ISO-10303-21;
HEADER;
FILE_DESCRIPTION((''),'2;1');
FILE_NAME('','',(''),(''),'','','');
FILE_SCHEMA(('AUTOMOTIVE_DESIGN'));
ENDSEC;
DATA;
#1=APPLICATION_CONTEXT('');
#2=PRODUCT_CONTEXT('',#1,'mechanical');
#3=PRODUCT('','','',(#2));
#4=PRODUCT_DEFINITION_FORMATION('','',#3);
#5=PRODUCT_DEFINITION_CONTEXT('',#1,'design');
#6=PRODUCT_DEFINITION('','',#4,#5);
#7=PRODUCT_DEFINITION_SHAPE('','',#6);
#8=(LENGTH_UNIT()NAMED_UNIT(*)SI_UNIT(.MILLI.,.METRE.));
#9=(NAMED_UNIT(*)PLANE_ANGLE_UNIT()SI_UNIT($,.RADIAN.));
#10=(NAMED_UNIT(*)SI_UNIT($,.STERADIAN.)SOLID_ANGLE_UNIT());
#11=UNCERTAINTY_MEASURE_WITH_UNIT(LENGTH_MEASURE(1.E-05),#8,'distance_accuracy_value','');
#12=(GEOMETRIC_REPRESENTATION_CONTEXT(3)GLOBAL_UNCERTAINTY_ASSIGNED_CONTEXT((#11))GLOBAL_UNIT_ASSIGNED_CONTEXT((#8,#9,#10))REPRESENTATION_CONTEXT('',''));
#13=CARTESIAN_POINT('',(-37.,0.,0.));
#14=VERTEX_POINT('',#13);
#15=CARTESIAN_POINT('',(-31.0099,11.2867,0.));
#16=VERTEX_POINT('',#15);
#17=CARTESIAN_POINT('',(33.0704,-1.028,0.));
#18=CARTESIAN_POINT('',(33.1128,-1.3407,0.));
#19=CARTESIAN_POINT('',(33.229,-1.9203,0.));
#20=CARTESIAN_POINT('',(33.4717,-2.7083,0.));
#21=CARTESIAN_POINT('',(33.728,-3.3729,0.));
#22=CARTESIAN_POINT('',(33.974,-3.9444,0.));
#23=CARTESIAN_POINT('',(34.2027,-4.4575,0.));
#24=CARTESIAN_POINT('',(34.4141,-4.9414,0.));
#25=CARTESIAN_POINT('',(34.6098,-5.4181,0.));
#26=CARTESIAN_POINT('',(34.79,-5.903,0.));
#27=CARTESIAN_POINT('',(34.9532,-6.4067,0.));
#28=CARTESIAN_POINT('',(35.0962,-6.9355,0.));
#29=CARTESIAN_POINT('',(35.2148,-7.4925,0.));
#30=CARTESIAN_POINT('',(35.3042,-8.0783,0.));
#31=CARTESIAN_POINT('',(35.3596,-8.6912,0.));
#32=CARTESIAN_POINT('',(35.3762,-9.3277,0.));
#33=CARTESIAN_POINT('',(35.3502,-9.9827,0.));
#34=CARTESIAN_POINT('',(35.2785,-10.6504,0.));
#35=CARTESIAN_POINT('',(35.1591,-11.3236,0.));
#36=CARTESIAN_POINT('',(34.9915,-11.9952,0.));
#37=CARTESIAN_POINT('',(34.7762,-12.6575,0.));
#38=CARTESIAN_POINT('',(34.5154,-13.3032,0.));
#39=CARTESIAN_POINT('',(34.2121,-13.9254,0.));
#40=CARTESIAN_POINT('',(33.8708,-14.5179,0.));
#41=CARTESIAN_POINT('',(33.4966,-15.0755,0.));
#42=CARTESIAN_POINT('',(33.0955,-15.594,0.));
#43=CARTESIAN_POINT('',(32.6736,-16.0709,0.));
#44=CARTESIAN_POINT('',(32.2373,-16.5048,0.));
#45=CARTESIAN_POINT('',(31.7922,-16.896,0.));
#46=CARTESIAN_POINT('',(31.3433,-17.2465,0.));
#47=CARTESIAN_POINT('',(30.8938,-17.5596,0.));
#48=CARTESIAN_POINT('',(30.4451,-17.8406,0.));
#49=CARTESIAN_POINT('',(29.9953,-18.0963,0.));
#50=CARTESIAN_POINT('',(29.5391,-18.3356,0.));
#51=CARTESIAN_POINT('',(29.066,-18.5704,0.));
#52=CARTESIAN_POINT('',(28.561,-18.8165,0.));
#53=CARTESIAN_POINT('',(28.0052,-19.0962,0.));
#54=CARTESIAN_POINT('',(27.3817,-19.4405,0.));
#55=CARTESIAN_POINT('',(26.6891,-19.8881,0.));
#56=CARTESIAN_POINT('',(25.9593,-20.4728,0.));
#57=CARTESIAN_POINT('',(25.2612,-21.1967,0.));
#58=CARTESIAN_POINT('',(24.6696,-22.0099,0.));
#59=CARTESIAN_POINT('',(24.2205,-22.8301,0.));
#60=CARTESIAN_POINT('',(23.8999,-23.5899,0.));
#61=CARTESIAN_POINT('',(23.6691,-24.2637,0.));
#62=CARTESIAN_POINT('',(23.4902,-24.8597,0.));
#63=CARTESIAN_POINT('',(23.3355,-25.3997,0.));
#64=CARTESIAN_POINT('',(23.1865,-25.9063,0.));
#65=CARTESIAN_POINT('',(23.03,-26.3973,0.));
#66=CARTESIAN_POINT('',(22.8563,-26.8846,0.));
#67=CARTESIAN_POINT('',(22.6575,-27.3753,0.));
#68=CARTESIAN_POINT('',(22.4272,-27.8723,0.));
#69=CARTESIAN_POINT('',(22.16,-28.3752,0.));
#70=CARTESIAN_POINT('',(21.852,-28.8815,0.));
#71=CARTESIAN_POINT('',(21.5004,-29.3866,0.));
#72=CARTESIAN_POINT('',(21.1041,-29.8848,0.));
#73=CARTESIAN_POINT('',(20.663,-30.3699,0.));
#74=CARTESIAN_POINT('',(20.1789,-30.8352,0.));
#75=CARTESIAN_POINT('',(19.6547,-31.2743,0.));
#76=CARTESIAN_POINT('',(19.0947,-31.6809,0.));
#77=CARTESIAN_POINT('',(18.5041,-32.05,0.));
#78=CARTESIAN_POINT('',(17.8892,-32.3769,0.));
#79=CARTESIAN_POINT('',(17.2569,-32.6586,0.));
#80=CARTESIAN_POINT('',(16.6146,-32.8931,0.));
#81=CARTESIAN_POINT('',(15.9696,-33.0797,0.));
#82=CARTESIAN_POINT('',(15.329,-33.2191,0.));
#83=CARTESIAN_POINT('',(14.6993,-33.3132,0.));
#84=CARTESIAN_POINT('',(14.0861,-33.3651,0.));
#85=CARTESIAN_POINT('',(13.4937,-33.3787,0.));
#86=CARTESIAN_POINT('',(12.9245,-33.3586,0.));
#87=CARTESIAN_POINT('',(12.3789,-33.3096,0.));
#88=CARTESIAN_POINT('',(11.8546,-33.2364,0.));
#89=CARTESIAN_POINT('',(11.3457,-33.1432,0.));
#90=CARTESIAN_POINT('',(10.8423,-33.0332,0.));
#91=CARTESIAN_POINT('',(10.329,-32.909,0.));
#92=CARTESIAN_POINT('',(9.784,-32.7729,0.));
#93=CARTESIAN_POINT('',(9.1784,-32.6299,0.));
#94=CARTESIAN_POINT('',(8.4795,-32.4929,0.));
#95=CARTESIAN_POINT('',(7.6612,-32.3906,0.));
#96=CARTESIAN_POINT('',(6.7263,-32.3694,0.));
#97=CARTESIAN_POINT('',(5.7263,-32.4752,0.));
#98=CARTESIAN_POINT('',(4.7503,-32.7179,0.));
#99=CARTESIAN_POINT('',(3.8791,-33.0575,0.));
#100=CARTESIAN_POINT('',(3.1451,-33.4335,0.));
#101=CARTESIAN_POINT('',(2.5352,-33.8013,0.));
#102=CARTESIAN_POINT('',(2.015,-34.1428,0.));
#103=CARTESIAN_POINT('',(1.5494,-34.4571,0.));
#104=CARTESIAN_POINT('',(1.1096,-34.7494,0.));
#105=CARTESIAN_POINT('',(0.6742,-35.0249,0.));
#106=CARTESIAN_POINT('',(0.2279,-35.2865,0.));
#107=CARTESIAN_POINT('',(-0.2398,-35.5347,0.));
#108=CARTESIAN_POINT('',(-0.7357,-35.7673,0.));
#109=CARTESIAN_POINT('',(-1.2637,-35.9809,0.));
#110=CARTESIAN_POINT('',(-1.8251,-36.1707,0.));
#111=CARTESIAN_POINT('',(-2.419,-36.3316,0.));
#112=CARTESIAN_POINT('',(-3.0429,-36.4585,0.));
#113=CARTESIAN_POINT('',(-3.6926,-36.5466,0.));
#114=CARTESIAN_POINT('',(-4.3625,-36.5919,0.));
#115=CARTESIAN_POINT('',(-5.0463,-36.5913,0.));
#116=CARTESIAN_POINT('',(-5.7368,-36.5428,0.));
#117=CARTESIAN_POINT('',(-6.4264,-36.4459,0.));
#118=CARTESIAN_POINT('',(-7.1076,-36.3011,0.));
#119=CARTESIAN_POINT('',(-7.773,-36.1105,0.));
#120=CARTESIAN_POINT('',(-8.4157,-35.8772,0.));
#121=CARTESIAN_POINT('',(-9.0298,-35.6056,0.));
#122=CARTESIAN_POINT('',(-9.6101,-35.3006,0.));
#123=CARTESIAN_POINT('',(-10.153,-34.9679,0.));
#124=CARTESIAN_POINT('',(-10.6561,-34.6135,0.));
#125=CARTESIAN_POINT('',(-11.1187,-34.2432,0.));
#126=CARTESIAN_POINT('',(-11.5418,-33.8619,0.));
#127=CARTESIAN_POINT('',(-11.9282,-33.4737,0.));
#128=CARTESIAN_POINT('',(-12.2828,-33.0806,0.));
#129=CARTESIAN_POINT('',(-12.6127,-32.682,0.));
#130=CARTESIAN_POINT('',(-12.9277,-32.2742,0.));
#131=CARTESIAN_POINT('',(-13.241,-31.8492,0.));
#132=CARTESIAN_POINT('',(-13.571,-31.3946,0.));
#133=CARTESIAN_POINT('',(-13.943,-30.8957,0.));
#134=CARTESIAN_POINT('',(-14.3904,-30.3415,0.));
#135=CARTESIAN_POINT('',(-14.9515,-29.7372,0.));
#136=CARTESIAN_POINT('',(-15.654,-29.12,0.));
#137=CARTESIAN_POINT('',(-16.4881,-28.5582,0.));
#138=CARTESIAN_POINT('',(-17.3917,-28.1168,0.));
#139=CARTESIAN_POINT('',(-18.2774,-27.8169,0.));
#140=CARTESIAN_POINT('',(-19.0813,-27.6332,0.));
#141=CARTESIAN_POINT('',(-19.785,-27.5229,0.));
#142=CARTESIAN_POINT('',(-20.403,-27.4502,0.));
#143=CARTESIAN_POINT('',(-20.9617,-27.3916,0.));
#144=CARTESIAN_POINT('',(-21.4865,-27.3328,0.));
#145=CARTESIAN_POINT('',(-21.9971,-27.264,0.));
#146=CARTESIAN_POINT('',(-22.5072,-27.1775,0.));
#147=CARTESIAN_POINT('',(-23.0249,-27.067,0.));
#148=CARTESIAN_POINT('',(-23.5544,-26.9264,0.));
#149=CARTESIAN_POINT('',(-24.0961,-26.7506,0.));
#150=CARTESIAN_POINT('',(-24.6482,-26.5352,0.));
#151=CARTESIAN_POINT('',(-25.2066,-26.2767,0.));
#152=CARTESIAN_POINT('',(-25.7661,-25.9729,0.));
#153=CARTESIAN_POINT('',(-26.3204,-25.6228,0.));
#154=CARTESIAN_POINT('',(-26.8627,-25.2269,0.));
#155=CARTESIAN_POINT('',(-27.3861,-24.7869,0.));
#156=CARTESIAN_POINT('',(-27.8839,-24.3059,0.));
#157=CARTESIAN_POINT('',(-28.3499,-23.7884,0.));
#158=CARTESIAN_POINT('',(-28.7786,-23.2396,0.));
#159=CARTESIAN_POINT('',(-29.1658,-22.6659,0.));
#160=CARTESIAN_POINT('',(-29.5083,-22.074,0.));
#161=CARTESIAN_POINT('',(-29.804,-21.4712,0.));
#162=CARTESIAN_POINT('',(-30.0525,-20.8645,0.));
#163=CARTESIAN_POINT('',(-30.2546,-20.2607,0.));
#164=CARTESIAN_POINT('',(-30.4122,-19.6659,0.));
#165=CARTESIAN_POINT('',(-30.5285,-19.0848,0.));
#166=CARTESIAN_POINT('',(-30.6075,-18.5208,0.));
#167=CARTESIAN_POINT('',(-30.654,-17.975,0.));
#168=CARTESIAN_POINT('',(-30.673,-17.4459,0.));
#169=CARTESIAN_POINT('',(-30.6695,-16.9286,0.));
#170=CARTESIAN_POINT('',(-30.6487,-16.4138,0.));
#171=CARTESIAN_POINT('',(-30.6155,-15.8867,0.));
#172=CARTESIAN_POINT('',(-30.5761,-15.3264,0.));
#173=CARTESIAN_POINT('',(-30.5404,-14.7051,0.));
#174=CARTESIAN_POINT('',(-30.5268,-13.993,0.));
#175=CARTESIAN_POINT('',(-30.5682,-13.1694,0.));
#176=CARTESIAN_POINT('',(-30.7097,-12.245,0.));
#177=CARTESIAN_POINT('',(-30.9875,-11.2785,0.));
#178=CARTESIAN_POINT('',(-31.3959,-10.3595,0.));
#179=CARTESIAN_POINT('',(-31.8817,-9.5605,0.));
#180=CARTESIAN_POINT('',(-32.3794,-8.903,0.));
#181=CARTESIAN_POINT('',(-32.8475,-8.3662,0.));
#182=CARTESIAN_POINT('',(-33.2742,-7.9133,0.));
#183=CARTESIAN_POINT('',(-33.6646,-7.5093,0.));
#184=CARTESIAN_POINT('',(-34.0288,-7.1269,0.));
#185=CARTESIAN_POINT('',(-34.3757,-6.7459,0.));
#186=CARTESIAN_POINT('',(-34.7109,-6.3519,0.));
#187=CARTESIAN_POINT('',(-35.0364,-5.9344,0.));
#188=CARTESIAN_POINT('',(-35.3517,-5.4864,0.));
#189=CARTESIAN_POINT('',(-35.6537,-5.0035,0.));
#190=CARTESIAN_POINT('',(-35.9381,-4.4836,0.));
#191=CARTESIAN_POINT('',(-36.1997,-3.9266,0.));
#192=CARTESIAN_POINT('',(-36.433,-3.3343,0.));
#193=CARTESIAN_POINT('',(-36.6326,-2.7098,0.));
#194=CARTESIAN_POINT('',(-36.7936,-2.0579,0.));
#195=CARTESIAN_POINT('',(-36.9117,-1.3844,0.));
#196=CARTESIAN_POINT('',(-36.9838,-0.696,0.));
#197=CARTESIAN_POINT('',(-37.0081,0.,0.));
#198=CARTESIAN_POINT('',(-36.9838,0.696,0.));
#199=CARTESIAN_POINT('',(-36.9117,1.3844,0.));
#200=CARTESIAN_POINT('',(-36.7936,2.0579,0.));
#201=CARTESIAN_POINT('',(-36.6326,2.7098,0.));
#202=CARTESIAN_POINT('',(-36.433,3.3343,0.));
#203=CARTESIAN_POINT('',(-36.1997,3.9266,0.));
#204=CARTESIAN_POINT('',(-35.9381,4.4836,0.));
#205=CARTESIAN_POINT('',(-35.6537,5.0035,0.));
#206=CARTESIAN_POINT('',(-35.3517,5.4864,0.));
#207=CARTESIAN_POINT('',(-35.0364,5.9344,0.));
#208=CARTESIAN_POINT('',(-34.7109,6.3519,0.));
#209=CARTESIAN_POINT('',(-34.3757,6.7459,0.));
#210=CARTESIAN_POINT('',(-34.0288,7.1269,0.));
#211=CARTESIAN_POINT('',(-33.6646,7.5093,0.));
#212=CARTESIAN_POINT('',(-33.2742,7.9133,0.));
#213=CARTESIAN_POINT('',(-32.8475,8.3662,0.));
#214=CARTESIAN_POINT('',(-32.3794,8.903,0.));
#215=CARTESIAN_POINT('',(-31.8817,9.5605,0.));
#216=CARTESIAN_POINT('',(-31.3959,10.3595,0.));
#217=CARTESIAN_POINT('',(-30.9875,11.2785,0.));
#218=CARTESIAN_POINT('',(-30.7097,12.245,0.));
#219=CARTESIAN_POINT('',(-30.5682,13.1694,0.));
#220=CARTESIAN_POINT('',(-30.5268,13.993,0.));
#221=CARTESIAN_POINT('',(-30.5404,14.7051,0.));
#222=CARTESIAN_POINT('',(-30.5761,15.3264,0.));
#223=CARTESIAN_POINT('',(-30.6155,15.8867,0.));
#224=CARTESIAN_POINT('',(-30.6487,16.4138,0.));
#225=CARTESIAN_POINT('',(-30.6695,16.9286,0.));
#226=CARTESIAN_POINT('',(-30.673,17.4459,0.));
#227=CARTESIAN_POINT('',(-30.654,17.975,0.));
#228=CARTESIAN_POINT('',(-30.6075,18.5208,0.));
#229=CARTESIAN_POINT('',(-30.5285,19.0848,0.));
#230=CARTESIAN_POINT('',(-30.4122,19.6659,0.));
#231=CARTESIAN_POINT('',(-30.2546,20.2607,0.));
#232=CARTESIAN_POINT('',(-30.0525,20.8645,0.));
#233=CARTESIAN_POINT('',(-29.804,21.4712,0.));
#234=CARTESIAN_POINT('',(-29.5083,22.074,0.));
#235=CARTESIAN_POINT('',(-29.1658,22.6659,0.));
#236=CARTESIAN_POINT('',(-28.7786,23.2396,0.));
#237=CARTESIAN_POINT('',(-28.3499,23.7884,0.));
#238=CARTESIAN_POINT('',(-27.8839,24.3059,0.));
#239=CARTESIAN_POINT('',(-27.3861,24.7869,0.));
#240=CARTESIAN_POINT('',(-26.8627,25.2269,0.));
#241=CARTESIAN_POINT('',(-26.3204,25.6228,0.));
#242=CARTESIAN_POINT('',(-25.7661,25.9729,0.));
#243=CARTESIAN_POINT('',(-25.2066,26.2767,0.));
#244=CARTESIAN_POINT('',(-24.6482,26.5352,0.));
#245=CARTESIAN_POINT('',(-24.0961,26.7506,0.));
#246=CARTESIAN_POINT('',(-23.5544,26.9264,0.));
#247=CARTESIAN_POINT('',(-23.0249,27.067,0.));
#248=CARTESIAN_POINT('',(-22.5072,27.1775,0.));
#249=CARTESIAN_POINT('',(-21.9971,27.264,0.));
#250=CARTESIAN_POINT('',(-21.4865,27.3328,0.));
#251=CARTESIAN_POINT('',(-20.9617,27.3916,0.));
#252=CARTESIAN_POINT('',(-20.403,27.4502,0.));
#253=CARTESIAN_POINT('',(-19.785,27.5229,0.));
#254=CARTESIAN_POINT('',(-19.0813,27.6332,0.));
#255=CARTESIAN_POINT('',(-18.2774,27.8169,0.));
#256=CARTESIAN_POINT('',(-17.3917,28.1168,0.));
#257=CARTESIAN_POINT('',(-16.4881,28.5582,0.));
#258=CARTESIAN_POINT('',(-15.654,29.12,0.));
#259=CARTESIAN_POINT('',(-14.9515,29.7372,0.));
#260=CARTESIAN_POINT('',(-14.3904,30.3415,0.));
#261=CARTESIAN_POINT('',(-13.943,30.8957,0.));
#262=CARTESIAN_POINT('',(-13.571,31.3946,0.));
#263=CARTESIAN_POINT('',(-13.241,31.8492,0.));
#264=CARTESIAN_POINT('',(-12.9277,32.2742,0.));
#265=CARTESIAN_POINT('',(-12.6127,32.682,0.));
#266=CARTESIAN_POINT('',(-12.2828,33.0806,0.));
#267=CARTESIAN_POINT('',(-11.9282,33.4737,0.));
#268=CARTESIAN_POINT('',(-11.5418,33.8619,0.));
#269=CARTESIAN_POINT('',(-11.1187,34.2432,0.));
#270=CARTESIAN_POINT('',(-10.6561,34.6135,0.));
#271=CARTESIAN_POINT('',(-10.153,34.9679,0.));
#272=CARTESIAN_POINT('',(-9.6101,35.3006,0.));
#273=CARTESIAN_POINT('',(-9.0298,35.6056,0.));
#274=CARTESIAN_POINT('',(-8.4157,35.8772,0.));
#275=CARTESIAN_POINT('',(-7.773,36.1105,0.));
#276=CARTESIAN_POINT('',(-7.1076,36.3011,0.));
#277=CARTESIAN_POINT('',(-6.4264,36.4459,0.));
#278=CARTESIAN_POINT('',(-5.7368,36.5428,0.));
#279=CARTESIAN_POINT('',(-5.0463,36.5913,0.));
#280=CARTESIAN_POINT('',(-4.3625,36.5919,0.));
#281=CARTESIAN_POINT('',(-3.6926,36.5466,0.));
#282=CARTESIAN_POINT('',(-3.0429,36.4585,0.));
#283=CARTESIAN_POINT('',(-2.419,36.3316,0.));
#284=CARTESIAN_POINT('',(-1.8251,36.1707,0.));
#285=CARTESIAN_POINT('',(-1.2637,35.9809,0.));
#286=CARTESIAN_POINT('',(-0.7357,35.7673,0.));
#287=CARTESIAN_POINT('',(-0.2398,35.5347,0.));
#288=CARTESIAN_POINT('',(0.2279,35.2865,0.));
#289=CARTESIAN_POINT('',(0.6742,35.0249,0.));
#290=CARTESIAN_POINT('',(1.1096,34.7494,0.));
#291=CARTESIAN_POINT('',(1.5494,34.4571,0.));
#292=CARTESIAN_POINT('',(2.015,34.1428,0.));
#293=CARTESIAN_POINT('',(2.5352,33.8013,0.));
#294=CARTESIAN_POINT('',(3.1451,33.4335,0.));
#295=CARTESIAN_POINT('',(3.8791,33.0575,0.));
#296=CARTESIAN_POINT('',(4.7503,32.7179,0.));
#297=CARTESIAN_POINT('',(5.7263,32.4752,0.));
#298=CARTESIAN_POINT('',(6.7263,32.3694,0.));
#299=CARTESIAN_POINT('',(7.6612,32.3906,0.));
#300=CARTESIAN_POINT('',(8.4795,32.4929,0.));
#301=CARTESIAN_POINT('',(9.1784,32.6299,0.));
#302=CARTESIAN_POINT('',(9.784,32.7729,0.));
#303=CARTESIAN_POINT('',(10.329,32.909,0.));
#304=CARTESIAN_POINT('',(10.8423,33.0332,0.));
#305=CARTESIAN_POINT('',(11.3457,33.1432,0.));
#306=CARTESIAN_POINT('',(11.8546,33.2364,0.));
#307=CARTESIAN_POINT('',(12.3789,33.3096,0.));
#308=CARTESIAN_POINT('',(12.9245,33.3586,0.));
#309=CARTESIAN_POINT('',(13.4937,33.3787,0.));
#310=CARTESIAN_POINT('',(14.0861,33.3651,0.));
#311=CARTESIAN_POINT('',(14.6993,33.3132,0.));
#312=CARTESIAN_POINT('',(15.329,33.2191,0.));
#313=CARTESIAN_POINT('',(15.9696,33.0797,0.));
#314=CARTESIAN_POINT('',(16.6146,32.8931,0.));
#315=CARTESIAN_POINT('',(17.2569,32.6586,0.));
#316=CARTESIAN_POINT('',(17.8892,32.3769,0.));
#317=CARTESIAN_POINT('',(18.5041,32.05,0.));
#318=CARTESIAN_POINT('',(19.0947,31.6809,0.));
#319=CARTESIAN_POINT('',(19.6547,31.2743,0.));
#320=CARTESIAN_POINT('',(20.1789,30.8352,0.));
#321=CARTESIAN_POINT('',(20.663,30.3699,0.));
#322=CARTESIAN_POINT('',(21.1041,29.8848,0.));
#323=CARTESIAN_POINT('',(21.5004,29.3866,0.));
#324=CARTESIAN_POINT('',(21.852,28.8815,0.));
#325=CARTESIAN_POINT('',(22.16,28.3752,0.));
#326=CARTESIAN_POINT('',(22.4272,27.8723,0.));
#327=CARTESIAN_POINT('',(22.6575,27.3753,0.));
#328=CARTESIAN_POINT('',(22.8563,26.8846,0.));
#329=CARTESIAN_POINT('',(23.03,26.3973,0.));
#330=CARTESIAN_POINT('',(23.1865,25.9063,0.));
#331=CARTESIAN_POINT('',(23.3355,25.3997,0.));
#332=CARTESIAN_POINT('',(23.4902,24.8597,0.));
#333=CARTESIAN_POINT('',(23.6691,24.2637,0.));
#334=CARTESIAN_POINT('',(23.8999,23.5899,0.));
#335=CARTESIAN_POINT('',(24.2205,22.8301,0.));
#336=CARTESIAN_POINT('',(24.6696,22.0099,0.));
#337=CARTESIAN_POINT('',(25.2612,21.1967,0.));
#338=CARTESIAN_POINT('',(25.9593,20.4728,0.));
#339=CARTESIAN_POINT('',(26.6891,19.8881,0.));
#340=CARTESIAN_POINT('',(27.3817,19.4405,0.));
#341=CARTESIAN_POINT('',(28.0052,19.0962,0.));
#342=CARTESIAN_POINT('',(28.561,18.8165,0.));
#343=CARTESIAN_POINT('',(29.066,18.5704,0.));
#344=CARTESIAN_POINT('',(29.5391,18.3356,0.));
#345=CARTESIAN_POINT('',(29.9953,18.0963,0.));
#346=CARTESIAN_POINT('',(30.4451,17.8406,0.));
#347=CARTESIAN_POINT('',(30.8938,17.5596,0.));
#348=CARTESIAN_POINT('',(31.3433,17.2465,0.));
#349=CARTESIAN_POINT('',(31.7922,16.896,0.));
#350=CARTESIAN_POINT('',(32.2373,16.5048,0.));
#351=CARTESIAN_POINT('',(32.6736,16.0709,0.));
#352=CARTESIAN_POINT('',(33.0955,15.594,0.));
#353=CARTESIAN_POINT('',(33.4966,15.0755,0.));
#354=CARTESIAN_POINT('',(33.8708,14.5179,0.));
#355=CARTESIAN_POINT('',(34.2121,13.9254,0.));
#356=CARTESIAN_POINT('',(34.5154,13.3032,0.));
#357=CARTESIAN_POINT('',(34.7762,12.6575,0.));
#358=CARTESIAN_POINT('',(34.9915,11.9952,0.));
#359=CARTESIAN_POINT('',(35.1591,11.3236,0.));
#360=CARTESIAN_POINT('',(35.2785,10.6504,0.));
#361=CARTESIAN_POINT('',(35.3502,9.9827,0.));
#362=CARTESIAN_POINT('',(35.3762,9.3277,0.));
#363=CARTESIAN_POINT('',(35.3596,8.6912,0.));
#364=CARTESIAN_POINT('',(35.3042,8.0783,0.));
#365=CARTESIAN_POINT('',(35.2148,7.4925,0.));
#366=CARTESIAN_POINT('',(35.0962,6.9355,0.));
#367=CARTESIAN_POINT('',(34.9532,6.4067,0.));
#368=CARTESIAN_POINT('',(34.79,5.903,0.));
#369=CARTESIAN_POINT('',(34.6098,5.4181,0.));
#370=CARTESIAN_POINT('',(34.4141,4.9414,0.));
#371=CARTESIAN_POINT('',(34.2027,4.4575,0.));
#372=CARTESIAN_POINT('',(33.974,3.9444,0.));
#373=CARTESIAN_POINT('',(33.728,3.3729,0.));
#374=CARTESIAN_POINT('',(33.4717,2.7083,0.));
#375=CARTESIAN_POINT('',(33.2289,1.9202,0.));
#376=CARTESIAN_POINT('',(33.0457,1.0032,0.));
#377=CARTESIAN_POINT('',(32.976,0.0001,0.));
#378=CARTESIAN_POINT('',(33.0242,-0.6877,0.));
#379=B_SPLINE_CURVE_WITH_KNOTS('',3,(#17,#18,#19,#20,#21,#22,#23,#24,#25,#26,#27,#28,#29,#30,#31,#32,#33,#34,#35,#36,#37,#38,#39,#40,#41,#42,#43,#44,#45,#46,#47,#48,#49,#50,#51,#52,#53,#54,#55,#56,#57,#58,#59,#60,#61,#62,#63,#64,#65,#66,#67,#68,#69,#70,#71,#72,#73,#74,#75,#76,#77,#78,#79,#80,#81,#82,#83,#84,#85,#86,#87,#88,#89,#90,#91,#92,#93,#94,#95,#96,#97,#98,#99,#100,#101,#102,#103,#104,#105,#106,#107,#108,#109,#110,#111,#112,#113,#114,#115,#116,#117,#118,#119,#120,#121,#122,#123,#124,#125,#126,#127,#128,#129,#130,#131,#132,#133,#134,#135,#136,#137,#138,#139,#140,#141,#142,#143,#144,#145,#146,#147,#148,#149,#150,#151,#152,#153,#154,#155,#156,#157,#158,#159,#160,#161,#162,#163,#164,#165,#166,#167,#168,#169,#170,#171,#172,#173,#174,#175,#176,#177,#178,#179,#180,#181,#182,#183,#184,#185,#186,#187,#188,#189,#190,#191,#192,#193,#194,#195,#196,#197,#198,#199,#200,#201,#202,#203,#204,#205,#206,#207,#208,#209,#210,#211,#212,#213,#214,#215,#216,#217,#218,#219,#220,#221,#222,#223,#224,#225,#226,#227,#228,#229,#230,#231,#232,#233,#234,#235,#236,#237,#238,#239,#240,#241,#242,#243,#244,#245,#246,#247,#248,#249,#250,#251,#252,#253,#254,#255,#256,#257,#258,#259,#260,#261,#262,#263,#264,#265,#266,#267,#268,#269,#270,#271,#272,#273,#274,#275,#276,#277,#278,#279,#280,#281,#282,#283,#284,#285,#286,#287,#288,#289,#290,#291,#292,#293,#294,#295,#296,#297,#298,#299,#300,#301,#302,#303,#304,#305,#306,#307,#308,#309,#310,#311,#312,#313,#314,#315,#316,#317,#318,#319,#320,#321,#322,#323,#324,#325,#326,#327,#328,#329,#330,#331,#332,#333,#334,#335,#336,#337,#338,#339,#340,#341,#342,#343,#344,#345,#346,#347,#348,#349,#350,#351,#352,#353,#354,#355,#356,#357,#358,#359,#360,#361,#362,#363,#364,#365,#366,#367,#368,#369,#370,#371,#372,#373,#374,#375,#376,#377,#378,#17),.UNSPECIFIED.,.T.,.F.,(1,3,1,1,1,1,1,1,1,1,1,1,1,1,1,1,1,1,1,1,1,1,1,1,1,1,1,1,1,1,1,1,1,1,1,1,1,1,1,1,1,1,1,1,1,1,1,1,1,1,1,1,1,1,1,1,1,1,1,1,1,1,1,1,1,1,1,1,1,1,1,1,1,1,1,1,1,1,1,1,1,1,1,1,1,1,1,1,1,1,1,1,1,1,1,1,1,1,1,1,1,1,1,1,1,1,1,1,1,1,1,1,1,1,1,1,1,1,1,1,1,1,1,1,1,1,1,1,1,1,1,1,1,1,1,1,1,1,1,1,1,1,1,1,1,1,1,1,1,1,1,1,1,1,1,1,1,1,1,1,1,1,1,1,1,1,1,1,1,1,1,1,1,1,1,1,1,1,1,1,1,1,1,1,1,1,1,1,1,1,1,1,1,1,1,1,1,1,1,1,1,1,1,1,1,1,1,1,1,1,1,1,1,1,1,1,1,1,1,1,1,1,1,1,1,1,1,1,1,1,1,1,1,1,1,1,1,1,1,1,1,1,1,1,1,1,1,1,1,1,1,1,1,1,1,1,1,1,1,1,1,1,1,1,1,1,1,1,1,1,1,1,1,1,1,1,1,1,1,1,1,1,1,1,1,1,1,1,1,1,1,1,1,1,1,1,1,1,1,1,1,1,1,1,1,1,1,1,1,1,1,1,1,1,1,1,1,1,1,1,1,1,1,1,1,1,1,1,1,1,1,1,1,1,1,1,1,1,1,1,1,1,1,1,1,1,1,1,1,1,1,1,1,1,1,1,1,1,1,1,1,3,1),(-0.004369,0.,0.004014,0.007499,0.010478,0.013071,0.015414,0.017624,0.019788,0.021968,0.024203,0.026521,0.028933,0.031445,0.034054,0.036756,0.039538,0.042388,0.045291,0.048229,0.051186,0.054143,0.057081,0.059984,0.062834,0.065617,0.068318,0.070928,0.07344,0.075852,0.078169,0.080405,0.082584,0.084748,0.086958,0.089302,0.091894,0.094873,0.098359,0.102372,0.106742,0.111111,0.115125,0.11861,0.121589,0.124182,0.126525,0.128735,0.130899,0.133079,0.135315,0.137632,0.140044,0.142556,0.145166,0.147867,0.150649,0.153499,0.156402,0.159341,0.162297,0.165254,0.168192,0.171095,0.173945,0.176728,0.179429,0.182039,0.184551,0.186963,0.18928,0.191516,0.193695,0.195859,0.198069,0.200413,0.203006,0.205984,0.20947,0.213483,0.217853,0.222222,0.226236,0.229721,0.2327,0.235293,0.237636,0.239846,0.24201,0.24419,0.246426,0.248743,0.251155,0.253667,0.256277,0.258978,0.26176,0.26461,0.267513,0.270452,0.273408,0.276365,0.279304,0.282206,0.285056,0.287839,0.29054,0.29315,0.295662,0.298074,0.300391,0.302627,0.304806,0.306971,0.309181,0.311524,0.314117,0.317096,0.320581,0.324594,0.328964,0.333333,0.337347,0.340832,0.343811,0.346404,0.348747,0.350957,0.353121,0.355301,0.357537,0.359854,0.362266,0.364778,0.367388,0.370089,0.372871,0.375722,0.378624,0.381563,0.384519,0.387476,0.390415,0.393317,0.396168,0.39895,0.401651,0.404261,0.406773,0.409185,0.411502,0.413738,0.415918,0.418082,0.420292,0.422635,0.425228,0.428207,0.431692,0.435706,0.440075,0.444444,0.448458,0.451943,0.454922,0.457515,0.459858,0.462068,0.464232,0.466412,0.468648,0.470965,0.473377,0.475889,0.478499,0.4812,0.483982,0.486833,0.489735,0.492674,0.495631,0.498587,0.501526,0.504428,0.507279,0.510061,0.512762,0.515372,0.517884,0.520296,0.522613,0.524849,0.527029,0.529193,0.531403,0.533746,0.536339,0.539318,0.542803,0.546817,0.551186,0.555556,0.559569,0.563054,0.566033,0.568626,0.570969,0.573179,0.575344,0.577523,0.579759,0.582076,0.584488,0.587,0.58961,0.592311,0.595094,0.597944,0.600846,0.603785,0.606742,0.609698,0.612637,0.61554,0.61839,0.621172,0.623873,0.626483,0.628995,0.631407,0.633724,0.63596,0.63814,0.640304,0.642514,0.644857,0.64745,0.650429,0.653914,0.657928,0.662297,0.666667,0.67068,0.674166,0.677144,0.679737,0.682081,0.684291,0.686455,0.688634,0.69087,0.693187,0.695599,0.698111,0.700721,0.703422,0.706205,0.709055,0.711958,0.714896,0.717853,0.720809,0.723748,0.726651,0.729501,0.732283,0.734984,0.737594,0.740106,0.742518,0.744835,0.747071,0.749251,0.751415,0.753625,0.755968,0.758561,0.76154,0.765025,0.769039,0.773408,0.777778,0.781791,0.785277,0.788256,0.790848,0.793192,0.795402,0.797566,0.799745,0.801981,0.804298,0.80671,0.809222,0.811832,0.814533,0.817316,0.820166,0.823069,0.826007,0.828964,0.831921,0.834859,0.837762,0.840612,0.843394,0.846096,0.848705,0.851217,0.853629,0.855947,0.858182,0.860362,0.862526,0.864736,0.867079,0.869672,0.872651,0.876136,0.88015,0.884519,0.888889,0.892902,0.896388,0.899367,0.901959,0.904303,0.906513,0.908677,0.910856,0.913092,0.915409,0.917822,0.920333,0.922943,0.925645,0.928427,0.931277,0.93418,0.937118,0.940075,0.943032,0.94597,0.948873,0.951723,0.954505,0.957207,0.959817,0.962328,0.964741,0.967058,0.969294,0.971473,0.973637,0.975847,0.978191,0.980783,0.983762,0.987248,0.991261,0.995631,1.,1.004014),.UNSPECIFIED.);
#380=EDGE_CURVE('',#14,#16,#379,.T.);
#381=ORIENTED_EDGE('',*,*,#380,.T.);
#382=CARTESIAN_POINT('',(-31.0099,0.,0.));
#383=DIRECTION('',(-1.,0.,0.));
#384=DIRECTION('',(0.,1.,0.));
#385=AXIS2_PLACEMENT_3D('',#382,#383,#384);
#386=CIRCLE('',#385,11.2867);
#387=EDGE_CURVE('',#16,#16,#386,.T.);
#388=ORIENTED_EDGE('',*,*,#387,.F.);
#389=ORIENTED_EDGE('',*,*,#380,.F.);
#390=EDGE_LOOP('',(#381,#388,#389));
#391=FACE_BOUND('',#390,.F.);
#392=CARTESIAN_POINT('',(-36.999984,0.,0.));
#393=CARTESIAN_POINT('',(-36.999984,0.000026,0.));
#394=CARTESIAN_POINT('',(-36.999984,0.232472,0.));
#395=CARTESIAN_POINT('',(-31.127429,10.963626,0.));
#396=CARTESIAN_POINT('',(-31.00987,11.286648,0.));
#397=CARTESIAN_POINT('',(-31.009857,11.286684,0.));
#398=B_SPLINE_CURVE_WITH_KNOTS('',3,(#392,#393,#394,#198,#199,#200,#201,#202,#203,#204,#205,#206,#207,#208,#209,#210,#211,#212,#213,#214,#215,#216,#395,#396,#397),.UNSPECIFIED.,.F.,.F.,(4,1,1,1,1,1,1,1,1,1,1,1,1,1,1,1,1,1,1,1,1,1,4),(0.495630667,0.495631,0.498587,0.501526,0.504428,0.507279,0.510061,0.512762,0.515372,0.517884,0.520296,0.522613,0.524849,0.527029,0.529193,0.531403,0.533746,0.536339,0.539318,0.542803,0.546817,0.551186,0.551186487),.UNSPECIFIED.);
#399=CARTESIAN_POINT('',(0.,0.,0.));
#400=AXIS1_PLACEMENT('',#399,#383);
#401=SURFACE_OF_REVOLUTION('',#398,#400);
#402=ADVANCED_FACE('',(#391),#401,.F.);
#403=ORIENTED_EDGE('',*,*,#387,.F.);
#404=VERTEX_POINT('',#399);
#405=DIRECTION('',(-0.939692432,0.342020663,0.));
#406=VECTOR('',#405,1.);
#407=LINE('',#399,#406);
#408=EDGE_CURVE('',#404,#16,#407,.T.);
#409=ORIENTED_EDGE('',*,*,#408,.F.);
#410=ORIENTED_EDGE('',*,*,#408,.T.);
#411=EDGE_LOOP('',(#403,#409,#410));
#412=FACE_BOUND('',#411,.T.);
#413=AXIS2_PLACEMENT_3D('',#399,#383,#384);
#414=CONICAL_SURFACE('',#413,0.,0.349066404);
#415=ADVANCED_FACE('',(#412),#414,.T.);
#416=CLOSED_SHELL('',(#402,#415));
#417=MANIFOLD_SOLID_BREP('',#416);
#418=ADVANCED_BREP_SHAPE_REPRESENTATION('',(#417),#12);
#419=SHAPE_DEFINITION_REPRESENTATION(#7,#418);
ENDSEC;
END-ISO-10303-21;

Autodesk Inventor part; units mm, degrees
ref_plane "YZ Plane" through (0, 0, 0) normal (1, 0, 0) x (0, 1, 0)
ref_plane "XZ Plane" through (0, 0, 0) normal (0, 1, 0) x (-1, 0, 0)
ref_plane "XY Plane" through (0, 0, 0) normal (0, 0, 1) x (1, 0, 0)
sketch "草圖1" plane through (0, 0, 0) normal (0, 0, 1) x (1, 0, 0)
  spline S0 degree 3 poles (33.0704, -1.028) (33.1128, -1.3407) (33.229, -1.9203) (33.4717, -2.7083) (33.728, -3.3729) (33.974, -3.9444) (34.2027, -4.4575) (34.4141, -4.9414) (34.6098, -5.4181) (34.79, -5.903) (34.9532, -6.4067) (35.0962, -6.9355) (35.2148, -7.4925) (35.3042, -8.0783) (35.3596, -8.6912) (35.3762, -9.3277) (35.3502, -9.9827) (35.2785, -10.6504) (35.1591, -11.3236) (34.9915, -11.9952) (34.7762, -12.6575) (34.5154, -13.3032) (34.2121, -13.9254) (33.8708, -14.5179) (33.4966, -15.0755) (33.0955, -15.594) (32.6736, -16.0709) (32.2373, -16.5048) (31.7922, -16.896) (31.3433, -17.2465) (30.8938, -17.5596) (30.4451, -17.8406) (29.9953, -18.0963) (29.5391, -18.3356) (29.066, -18.5704) (28.561, -18.8165) (28.0052, -19.0962) (27.3817, -19.4405) (26.6891, -19.8881) (25.9593, -20.4728) (25.2612, -21.1967) (24.6696, -22.0099) (24.2205, -22.8301) (23.8999, -23.5899) (23.6691, -24.2637) (23.4902, -24.8597) (23.3355, -25.3997) (23.1865, -25.9063) (23.03, -26.3973) (22.8563, -26.8846) (22.6575, -27.3753) (22.4272, -27.8723) (22.16, -28.3752) (21.852, -28.8815) (21.5004, -29.3866) (21.1041, -29.8848) (20.663, -30.3699) (20.1789, -30.8352) (19.6547, -31.2743) (19.0947, -31.6809) (18.5041, -32.05) (17.8892, -32.3769) (17.2569, -32.6586) (16.6146, -32.8931) (15.9696, -33.0797) (15.329, -33.2191) (14.6993, -33.3132) (14.0861, -33.3651) (13.4937, -33.3787) (12.9245, -33.3586) (12.3789, -33.3096) (11.8546, -33.2364) (11.3457, -33.1432) (10.8423, -33.0332) (10.329, -32.909) (9.784, -32.7729) (9.1784, -32.6299) (8.4795, -32.4929) (7.6612, -32.3906) (6.7263, -32.3694) (5.7263, -32.4752) (4.7503, -32.7179) (3.8791, -33.0575) (3.1451, -33.4335) (2.5352, -33.8013) (2.015, -34.1428) (1.5494, -34.4571) (1.1096, -34.7494) (0.6742, -35.0249) (0.2279, -35.2865) (-0.2398, -35.5347) (-0.7357, -35.7673) (-1.2637, -35.9809) (-1.8251, -36.1707) (-2.419, -36.3316) (-3.0429, -36.4585) (-3.6926, -36.5466) (-4.3625, -36.5919) (-5.0463, -36.5913) (-5.7368, -36.5428) (-6.4264, -36.4459) (-7.1076, -36.3011) (-7.773, -36.1105) (-8.4157, -35.8772) (-9.0298, -35.6056) (-9.6101, -35.3006) (-10.153, -34.9679) (-10.6561, -34.6135) (-11.1187, -34.2432) (-11.5418, -33.8619) (-11.9282, -33.4737) (-12.2828, -33.0806) (-12.6127, -32.682) (-12.9277, -32.2742) (-13.241, -31.8492) (-13.571, -31.3946) (-13.943, -30.8957) (-14.3904, -30.3415) (-14.9515, -29.7372) (-15.654, -29.12) (-16.4881, -28.5582) (-17.3917, -28.1168) (-18.2774, -27.8169) (-19.0813, -27.6332) (-19.785, -27.5229) (-20.403, -27.4502) (-20.9617, -27.3916) (-21.4865, -27.3328) (-21.9971, -27.264) (-22.5072, -27.1775) (-23.0249, -27.067) (-23.5544, -26.9264) (-24.0961, -26.7506) (-24.6482, -26.5352) (-25.2066, -26.2767) (-25.7661, -25.9729) (-26.3204, -25.6228) (-26.8627, -25.2269) (-27.3861, -24.7869) (-27.8839, -24.3059) (-28.3499, -23.7884) (-28.7786, -23.2396) (-29.1658, -22.6659) (-29.5083, -22.074) (-29.804, -21.4712) (-30.0525, -20.8645) (-30.2546, -20.2607) (-30.4122, -19.6659) (-30.5285, -19.0848) (-30.6075, -18.5208) (-30.654, -17.975) (-30.673, -17.4459) (-30.6695, -16.9286) (-30.6487, -16.4138) (-30.6155, -15.8867) (-30.5761, -15.3264) (-30.5404, -14.7051) (-30.5268, -13.993) (-30.5682, -13.1694) (-30.7097, -12.245) (-30.9875, -11.2785) (-31.3959, -10.3595) (-31.8817, -9.5605) (-32.3794, -8.903) (-32.8475, -8.3662) (-33.2742, -7.9133) (-33.6646, -7.5093) (-34.0288, -7.1269) (-34.3757, -6.7459) (-34.7109, -6.3519) (-35.0364, -5.9344) (-35.3517, -5.4864) (-35.6537, -5.0035) (-35.9381, -4.4836) (-36.1997, -3.9266) (-36.433, -3.3343) (-36.6326, -2.7098) (-36.7936, -2.0579) (-36.9117, -1.3844) (-36.9838, -0.696) (-37.0081, 0) (-36.9838, 0.696) (-36.9117, 1.3844) (-36.7936, 2.0579) (-36.6326, 2.7098) (-36.433, 3.3343) (-36.1997, 3.9266) (-35.9381, 4.4836) (-35.6537, 5.0035) (-35.3517, 5.4864) (-35.0364, 5.9344) (-34.7109, 6.3519) (-34.3757, 6.7459) (-34.0288, 7.1269) (-33.6646, 7.5093) (-33.2742, 7.9133) (-32.8475, 8.3662) (-32.3794, 8.903) (-31.8817, 9.5605) (-31.3959, 10.3595) (-30.9875, 11.2785) (-30.7097, 12.245) (-30.5682, 13.1694) (-30.5268, 13.993) (-30.5404, 14.7051) (-30.5761, 15.3264) (-30.6155, 15.8867) (-30.6487, 16.4138) (-30.6695, 16.9286) (-30.673, 17.4459) (-30.654, 17.975) (-30.6075, 18.5208) (-30.5285, 19.0848) (-30.4122, 19.6659) (-30.2546, 20.2607) (-30.0525, 20.8645) (-29.804, 21.4712) (-29.5083, 22.074) (-29.1658, 22.6659) (-28.7786, 23.2396) (-28.3499, 23.7884) (-27.8839, 24.3059) (-27.3861, 24.7869) (-26.8627, 25.2269) (-26.3204, 25.6228) (-25.7661, 25.9729) (-25.2066, 26.2767) (-24.6482, 26.5352) (-24.0961, 26.7506) (-23.5544, 26.9264) (-23.0249, 27.067) (-22.5072, 27.1775) (-21.9971, 27.264) (-21.4865, 27.3328) (-20.9617, 27.3916) (-20.403, 27.4502) (-19.785, 27.5229) (-19.0813, 27.6332) (-18.2774, 27.8169) (-17.3917, 28.1168) (-16.4881, 28.5582) (-15.654, 29.12) (-14.9515, 29.7372) (-14.3904, 30.3415) (-13.943, 30.8957) (-13.571, 31.3946) (-13.241, 31.8492) (-12.9277, 32.2742) (-12.6127, 32.682) (-12.2828, 33.0806) (-11.9282, 33.4737) (-11.5418, 33.8619) (-11.1187, 34.2432) (-10.6561, 34.6135) (-10.153, 34.9679) (-9.6101, 35.3006) (-9.0298, 35.6056) (-8.4157, 35.8772) (-7.773, 36.1105) (-7.1076, 36.3011) (-6.4264, 36.4459) (-5.7368, 36.5428) (-5.0463, 36.5913) (-4.3625, 36.5919) (-3.6926, 36.5466) (-3.0429, 36.4585) (-2.419, 36.3316) (-1.8251, 36.1707) (-1.2637, 35.9809) (-0.7357, 35.7673) (-0.2398, 35.5347) (0.2279, 35.2865) (0.6742, 35.0249) (1.1096, 34.7494) (1.5494, 34.4571) (2.015, 34.1428) (2.5352, 33.8013) (3.1451, 33.4335) (3.8791, 33.0575) (4.7503, 32.7179) (5.7263, 32.4752) (6.7263, 32.3694) (7.6612, 32.3906) (8.4795, 32.4929) (9.1784, 32.6299) (9.784, 32.7729) (10.329, 32.909) (10.8423, 33.0332) (11.3457, 33.1432) (11.8546, 33.2364) (12.3789, 33.3096) (12.9245, 33.3586) (13.4937, 33.3787) (14.0861, 33.3651) (14.6993, 33.3132) (15.329, 33.2191) (15.9696, 33.0797) (16.6146, 32.8931) (17.2569, 32.6586) (17.8892, 32.3769) (18.5041, 32.05) (19.0947, 31.6809) (19.6547, 31.2743) (20.1789, 30.8352) (20.663, 30.3699) (21.1041, 29.8848) (21.5004, 29.3866) (21.852, 28.8815) (22.16, 28.3752) (22.4272, 27.8723) (22.6575, 27.3753) (22.8563, 26.8846) (23.03, 26.3973) (23.1865, 25.9063) (23.3355, 25.3997) (23.4902, 24.8597) (23.6691, 24.2637) (23.8999, 23.5899) (24.2205, 22.8301) (24.6696, 22.0099) (25.2612, 21.1967) (25.9593, 20.4728) (26.6891, 19.8881) (27.3817, 19.4405) (28.0052, 19.0962) (28.561, 18.8165) (29.066, 18.5704) (29.5391, 18.3356) (29.9953, 18.0963) (30.4451, 17.8406) (30.8938, 17.5596) (31.3433, 17.2465) (31.7922, 16.896) (32.2373, 16.5048) (32.6736, 16.0709) (33.0955, 15.594) (33.4966, 15.0755) (33.8708, 14.5179) (34.2121, 13.9254) (34.5154, 13.3032) (34.7762, 12.6575) (34.9915, 11.9952) (35.1591, 11.3236) (35.2785, 10.6504) (35.3502, 9.9827) (35.3762, 9.3277) (35.3596, 8.6912) (35.3042, 8.0783) (35.2148, 7.4925) (35.0962, 6.9355) (34.9532, 6.4067) (34.79, 5.903) (34.6098, 5.4181) (34.4141, 4.9414) (34.2027, 4.4575) (33.974, 3.9444) (33.728, 3.3729) (33.4717, 2.7083) (33.2289, 1.9202) (33.0457, 1.0032) (32.976, 0.0001) (33.0242, -0.6877) (33.0704, -1.028) knots 0 0 0 0 0.004014 0.007499 0.010478 0.013071 0.015414 0.017624 0.019788 0.021968 0.024203 0.026521 0.028933 0.031445 0.034054 0.036756 0.039538 0.042388 0.045291 0.048229 0.051186 0.054143 0.057081 0.059984 0.062834 0.065617 0.068318 0.070928 0.07344 0.075852 0.078169 0.080405 0.082584 0.084748 0.086958 0.089302 0.091894 0.094873 0.098359 0.102372 0.106742 0.111111 0.115125 0.11861 0.121589 0.124182 0.126525 0.128735 0.130899 0.133079 0.135315 0.137632 0.140044 0.142556 0.145166 0.147867 0.150649 0.153499 0.156402 0.159341 0.162297 0.165254 0.168192 0.171095 0.173945 0.176728 0.179429 0.182039 0.184551 0.186963 0.18928 0.191516 0.193695 0.195859 0.198069 0.200413 0.203006 0.205984 0.20947 0.213483 0.217853 0.222222 0.226236 0.229721 0.2327 0.235293 0.237636 0.239846 0.24201 0.24419 0.246426 0.248743 0.251155 0.253667 0.256277 0.258978 0.26176 0.26461 0.267513 0.270452 0.273408 0.276365 0.279304 0.282206 0.285056 0.287839 0.29054 0.29315 0.295662 0.298074 0.300391 0.302627 0.304806 0.306971 0.309181 0.311524 0.314117 0.317096 0.320581 0.324594 0.328964 0.333333 0.337347 0.340832 0.343811 0.346404 0.348747 0.350957 0.353121 0.355301 0.357537 0.359854 0.362266 0.364778 0.367388 0.370089 0.372871 0.375722 0.378624 0.381563 0.384519 0.387476 0.390415 0.393317 0.396168 0.39895 0.401651 0.404261 0.406773 0.409185 0.411502 0.413738 0.415918 0.418082 0.420292 0.422635 0.425228 0.428207 0.431692 0.435706 0.440075 0.444444 0.448458 0.451943 0.454922 0.457515 0.459858 0.462068 0.464232 0.466412 0.468648 0.470965 0.473377 0.475889 0.478499 0.4812 0.483982 0.486833 0.489735 0.492674 0.495631 0.498587 0.501526 0.504428 0.507279 0.510061 0.512762 0.515372 0.517884 0.520296 0.522613 0.524849 0.527029 0.529193 0.531403 0.533746 0.536339 0.539318 0.542803 0.546817 0.551186 0.555556 0.559569 0.563054 0.566033 0.568626 0.570969 0.573179 0.575344 0.577523 0.579759 0.582076 0.584488 0.587 0.58961 0.592311 0.595094 0.597944 0.600846 0.603785 0.606742 0.609698 0.612637 0.61554 0.61839 0.621172 0.623873 0.626483 0.628995 0.631407 0.633724 0.63596 0.63814 0.640304 0.642514 0.644857 0.64745 0.650429 0.653914 0.657928 0.662297 0.666667 0.67068 0.674166 0.677144 0.679737 0.682081 0.684291 0.686455 0.688634 0.69087 0.693187 0.695599 0.698111 0.700721 0.703422 0.706205 0.709055 0.711958 0.714896 0.717853 0.720809 0.723748 0.726651 0.729501 0.732283 0.734984 0.737594 0.740106 0.742518 0.744835 0.747071 0.749251 0.751415 0.753625 0.755968 0.758561 0.76154 0.765025 0.769039 0.773408 0.777778 0.781791 0.785277 0.788256 0.790848 0.793192 0.795402 0.797566 0.799745 0.801981 0.804298 0.80671 0.809222 0.811832 0.814533 0.817316 0.820166 0.823069 0.826007 0.828964 0.831921 0.834859 0.837762 0.840612 0.843394 0.846096 0.848705 0.851217 0.853629 0.855947 0.858182 0.860362 0.862526 0.864736 0.867079 0.869672 0.872651 0.876136 0.88015 0.884519 0.888889 0.892902 0.896388 0.899367 0.901959 0.904303 0.906513 0.908677 0.910856 0.913092 0.915409 0.917822 0.920333 0.922943 0.925645 0.928427 0.931277 0.93418 0.937118 0.940075 0.943032 0.94597 0.948873 0.951723 0.954505 0.957207 0.959817 0.962328 0.964741 0.967058 0.969294 0.971473 0.973637 0.975847 0.978191 0.980783 0.983762 0.987248 0.991261 0.995631 1 1 1 1
  line L0 (0, 0) -> (-31.0099, 11.2867)
  line L1 (0, 0) -> (-31.0099, -11.2867)
  line L2 (0, 0) -> (-37, 0)
  point P0 (33.4931, -2.7429)
  point P1 (33.7434, -3.3994)
  point P2 (33.983, -3.9619)
  point P3 (34.2063, -4.4674)
  point P4 (34.4138, -4.9455)
  point P5 (34.6067, -5.418)
  point P6 (34.7851, -5.9001)
  point P7 (34.9471, -6.4018)
  point P8 (35.0895, -6.9294)
  point P9 (35.2078, -7.4858)
  point P10 (35.2972, -8.0714)
  point P11 (35.3525, -8.6844)
  point P12 (35.3692, -9.3212)
  point P13 (35.3432, -9.9769)
  point P14 (35.2714, -10.6452)
  point P15 (35.1519, -11.3192)
  point P16 (34.9841, -11.9916)
  point P17 (34.7686, -12.6547)
  point P18 (34.5074, -13.3013)
  point P19 (34.2038, -13.9242)
  point P20 (33.862, -14.5173)
  point P21 (33.4874, -15.0754)
  point P22 (33.0859, -15.5944)
  point P23 (32.6638, -16.0715)
  point P24 (32.2274, -16.5055)
  point P25 (31.7826, -16.8967)
  point P26 (31.3343, -17.2469)
  point P27 (30.8861, -17.5595)
  point P28 (30.4394, -17.8397)
  point P29 (29.9929, -18.0943)
  point P30 (29.5414, -18.3323)
  point P31 (29.0751, -18.5652)
  point P32 (28.5792, -18.8089)
  point P33 (28.034, -19.0858)
  point P34 (27.4203, -19.4277)
  point P35 (26.7315, -19.8762)
  point P36 (25.9942, -20.4697)
  point P37 (25.2795, -21.212)
  point P38 (24.6726, -22.0447)
  point P39 (24.2161, -22.8739)
  point P40 (23.894, -23.6301)
  point P41 (23.6638, -24.2939)
  point P42 (23.4859, -24.8788)
  point P43 (23.332, -25.4096)
  point P44 (23.1836, -25.9092)
  point P45 (23.0276, -26.3952)
  point P46 (22.8544, -26.8791)
  point P47 (22.656, -27.3677)
  point P48 (22.426, -27.8633)
  point P49 (22.159, -28.3656)
  point P50 (21.851, -28.8716)
  point P51 (21.4994, -29.3768)
  point P52 (21.1028, -29.8754)
  point P53 (20.6614, -30.3609)
  point P54 (20.1769, -30.8267)
  point P55 (19.6521, -31.2663)
  point P56 (19.0913, -31.6735)
  point P57 (18.5, -32.0429)
  point P58 (17.8844, -32.3703)
  point P59 (17.2513, -32.6523)
  point P60 (16.6083, -32.887)
  point P61 (15.9626, -33.0738)
  point P62 (15.3214, -33.2132)
  point P63 (14.6914, -33.3074)
  point P64 (14.0781, -33.3593)
  point P65 (13.4859, -33.373)
  point P66 (12.9174, -33.3531)
  point P67 (12.3731, -33.3045)
  point P68 (11.8508, -33.2321)
  point P69 (11.3451, -33.1401)
  point P70 (10.8463, -33.0322)
  point P71 (10.3394, -32.9109)
  point P72 (9.8028, -32.7788)
  point P73 (9.2072, -32.6404)
  point P74 (8.5173, -32.5079)
  point P75 (7.7014, -32.4087)
  point P76 (6.755, -32.3894)
  point P77 (5.7304, -32.4987)
  point P78 (4.7302, -32.7465)
  point P79 (3.8475, -33.0882)
  point P80 (3.1147, -33.4605)
  point P81 (2.5118, -33.821)
  point P82 (1.9994, -34.1547)
  point P83 (1.5404, -34.4624)
  point P84 (1.1055, -34.7497)
  point P85 (0.6737, -35.0218)
  point P86 (0.2299, -35.2812)
  point P87 (-0.2361, -35.5279)
  point P88 (-0.7309, -35.7597)
  point P89 (-1.2583, -35.9728)
  point P90 (-1.8195, -36.1625)
  point P91 (-2.4136, -36.3235)
  point P92 (-3.0378, -36.4505)
  point P93 (-3.688, -36.5387)
  point P94 (-4.3587, -36.5841)
  point P95 (-5.0432, -36.5835)
  point P96 (-5.7345, -36.5349)
  point P97 (-6.425, -36.4379)
  point P98 (-7.107, -36.2929)
  point P99 (-7.7732, -36.1021)
  point P100 (-8.4167, -35.8685)
  point P101 (-9.0313, -35.5965)
  point P102 (-9.6122, -35.2912)
  point P103 (-10.1553, -34.9584)
  point P104 (-10.6585, -34.604)
  point P105 (-11.121, -34.2338)
  point P106 (-11.5437, -33.8531)
  point P107 (-11.9294, -33.466)
  point P108 (-12.2829, -33.0748)
  point P109 (-12.6112, -32.6793)
  point P110 (-12.924, -32.276)
  point P111 (-13.2343, -31.8572)
  point P112 (-13.5604, -31.4111)
  point P113 (-13.9277, -30.9223)
  point P114 (-14.3711, -30.3773)
  point P115 (-14.9323, -29.7768)
  point P116 (-15.6449, -29.1538)
  point P117 (-16.5, -28.5788)
  point P118 (-17.4255, -28.1258)
  point P119 (-18.3213, -27.8202)
  point P120 (-19.122, -27.6344)
  point P121 (-19.8156, -27.5229)
  point P122 (-20.4226, -27.4492)
  point P123 (-20.972, -27.3899)
  point P124 (-21.4898, -27.3305)
  point P125 (-21.9955, -27.2613)
  point P126 (-22.5022, -27.1747)
  point P127 (-23.0177, -27.0642)
  point P128 (-23.5458, -26.9237)
  point P129 (-24.0868, -26.748)
  point P130 (-24.6386, -26.5325)
  point P131 (-25.1972, -26.274)
  point P132 (-25.757, -25.97)
  point P133 (-26.3118, -25.6196)
  point P134 (-26.8547, -25.2233)
  point P135 (-27.3787, -24.7828)
  point P136 (-27.8771, -24.3013)
  point P137 (-28.3436, -23.7831)
  point P138 (-28.7729, -23.2337)
  point P139 (-29.1606, -22.6593)
  point P140 (-29.5034, -22.0667)
  point P141 (-29.7994, -21.4633)
  point P142 (-30.0481, -20.8561)
  point P143 (-30.2503, -20.252)
  point P144 (-30.4079, -19.657)
  point P145 (-30.5242, -19.0762)
  point P146 (-30.6033, -18.5128)
  point P147 (-30.65, -17.9684)
  point P148 (-30.6693, -17.4415)
  point P149 (-30.6666, -16.9274)
  point P150 (-30.6469, -16.4175)
  point P151 (-30.6155, -15.8972)
  point P152 (-30.5786, -15.3458)
  point P153 (-30.5457, -14.7353)
  point P154 (-30.535, -14.0328)
  point P155 (-30.579, -13.2121)
  point P156 (-30.7244, -12.2768)
  point P157 (-31.4276, -10.3447)
  point P158 (-31.9174, -9.5348)
  point P159 (-32.4113, -8.8778)
  point P160 (-32.871, -8.3466)
  point P161 (-33.2886, -7.8999)
  point P162 (-33.6714, -7.5013)
  point P163 (-34.0298, -7.1229)
  point P164 (-34.3727, -6.7449)
  point P165 (-34.7052, -6.3529)
  point P166 (-35.0291, -5.9369)
  point P167 (-35.3433, -5.4898)
  point P168 (-35.6448, -5.0074)
  point P169 (-35.9291, -4.4877)
  point P170 (-36.1907, -3.9306)
  point P171 (-36.4242, -3.3379)
  point P172 (-36.624, -2.7129)
  point P173 (-36.7851, -2.0603)
  point P174 (-36.9034, -1.3861)
  point P175 (-36.9757, -0.6968)
  point P176 (-36.9757, 0.6968)
  point P177 (-36.9034, 1.3861)
  point P178 (-36.7851, 2.0603)
  point P179 (-36.624, 2.7129)
  point P180 (-36.4242, 3.3379)
  point P181 (-36.1907, 3.9306)
  point P182 (-35.9291, 4.4877)
  point P183 (-35.6448, 5.0074)
  point P184 (-35.3433, 5.4898)
  point P185 (-35.0291, 5.9369)
  point P186 (-34.7052, 6.3529)
  point P187 (-34.3727, 6.7449)
  point P188 (-34.0298, 7.1229)
  point P189 (-33.6714, 7.5013)
  point P190 (-33.2886, 7.8999)
  point P191 (-32.871, 8.3466)
  point P192 (-32.4113, 8.8778)
  point P193 (-31.9174, 9.5348)
  point P194 (-31.4276, 10.3447)
  point P195 (-30.7244, 12.2768)
  point P196 (-30.579, 13.2121)
  point P197 (-30.535, 14.0328)
  point P198 (-30.5457, 14.7353)
  point P199 (-30.5786, 15.3458)
revolve "迴轉2" add sketch "草圖1" angle 360 about axis through (0, 0, 0) along (-1, 0, 0) contours L0 L2 S0
properties part number "錐"
